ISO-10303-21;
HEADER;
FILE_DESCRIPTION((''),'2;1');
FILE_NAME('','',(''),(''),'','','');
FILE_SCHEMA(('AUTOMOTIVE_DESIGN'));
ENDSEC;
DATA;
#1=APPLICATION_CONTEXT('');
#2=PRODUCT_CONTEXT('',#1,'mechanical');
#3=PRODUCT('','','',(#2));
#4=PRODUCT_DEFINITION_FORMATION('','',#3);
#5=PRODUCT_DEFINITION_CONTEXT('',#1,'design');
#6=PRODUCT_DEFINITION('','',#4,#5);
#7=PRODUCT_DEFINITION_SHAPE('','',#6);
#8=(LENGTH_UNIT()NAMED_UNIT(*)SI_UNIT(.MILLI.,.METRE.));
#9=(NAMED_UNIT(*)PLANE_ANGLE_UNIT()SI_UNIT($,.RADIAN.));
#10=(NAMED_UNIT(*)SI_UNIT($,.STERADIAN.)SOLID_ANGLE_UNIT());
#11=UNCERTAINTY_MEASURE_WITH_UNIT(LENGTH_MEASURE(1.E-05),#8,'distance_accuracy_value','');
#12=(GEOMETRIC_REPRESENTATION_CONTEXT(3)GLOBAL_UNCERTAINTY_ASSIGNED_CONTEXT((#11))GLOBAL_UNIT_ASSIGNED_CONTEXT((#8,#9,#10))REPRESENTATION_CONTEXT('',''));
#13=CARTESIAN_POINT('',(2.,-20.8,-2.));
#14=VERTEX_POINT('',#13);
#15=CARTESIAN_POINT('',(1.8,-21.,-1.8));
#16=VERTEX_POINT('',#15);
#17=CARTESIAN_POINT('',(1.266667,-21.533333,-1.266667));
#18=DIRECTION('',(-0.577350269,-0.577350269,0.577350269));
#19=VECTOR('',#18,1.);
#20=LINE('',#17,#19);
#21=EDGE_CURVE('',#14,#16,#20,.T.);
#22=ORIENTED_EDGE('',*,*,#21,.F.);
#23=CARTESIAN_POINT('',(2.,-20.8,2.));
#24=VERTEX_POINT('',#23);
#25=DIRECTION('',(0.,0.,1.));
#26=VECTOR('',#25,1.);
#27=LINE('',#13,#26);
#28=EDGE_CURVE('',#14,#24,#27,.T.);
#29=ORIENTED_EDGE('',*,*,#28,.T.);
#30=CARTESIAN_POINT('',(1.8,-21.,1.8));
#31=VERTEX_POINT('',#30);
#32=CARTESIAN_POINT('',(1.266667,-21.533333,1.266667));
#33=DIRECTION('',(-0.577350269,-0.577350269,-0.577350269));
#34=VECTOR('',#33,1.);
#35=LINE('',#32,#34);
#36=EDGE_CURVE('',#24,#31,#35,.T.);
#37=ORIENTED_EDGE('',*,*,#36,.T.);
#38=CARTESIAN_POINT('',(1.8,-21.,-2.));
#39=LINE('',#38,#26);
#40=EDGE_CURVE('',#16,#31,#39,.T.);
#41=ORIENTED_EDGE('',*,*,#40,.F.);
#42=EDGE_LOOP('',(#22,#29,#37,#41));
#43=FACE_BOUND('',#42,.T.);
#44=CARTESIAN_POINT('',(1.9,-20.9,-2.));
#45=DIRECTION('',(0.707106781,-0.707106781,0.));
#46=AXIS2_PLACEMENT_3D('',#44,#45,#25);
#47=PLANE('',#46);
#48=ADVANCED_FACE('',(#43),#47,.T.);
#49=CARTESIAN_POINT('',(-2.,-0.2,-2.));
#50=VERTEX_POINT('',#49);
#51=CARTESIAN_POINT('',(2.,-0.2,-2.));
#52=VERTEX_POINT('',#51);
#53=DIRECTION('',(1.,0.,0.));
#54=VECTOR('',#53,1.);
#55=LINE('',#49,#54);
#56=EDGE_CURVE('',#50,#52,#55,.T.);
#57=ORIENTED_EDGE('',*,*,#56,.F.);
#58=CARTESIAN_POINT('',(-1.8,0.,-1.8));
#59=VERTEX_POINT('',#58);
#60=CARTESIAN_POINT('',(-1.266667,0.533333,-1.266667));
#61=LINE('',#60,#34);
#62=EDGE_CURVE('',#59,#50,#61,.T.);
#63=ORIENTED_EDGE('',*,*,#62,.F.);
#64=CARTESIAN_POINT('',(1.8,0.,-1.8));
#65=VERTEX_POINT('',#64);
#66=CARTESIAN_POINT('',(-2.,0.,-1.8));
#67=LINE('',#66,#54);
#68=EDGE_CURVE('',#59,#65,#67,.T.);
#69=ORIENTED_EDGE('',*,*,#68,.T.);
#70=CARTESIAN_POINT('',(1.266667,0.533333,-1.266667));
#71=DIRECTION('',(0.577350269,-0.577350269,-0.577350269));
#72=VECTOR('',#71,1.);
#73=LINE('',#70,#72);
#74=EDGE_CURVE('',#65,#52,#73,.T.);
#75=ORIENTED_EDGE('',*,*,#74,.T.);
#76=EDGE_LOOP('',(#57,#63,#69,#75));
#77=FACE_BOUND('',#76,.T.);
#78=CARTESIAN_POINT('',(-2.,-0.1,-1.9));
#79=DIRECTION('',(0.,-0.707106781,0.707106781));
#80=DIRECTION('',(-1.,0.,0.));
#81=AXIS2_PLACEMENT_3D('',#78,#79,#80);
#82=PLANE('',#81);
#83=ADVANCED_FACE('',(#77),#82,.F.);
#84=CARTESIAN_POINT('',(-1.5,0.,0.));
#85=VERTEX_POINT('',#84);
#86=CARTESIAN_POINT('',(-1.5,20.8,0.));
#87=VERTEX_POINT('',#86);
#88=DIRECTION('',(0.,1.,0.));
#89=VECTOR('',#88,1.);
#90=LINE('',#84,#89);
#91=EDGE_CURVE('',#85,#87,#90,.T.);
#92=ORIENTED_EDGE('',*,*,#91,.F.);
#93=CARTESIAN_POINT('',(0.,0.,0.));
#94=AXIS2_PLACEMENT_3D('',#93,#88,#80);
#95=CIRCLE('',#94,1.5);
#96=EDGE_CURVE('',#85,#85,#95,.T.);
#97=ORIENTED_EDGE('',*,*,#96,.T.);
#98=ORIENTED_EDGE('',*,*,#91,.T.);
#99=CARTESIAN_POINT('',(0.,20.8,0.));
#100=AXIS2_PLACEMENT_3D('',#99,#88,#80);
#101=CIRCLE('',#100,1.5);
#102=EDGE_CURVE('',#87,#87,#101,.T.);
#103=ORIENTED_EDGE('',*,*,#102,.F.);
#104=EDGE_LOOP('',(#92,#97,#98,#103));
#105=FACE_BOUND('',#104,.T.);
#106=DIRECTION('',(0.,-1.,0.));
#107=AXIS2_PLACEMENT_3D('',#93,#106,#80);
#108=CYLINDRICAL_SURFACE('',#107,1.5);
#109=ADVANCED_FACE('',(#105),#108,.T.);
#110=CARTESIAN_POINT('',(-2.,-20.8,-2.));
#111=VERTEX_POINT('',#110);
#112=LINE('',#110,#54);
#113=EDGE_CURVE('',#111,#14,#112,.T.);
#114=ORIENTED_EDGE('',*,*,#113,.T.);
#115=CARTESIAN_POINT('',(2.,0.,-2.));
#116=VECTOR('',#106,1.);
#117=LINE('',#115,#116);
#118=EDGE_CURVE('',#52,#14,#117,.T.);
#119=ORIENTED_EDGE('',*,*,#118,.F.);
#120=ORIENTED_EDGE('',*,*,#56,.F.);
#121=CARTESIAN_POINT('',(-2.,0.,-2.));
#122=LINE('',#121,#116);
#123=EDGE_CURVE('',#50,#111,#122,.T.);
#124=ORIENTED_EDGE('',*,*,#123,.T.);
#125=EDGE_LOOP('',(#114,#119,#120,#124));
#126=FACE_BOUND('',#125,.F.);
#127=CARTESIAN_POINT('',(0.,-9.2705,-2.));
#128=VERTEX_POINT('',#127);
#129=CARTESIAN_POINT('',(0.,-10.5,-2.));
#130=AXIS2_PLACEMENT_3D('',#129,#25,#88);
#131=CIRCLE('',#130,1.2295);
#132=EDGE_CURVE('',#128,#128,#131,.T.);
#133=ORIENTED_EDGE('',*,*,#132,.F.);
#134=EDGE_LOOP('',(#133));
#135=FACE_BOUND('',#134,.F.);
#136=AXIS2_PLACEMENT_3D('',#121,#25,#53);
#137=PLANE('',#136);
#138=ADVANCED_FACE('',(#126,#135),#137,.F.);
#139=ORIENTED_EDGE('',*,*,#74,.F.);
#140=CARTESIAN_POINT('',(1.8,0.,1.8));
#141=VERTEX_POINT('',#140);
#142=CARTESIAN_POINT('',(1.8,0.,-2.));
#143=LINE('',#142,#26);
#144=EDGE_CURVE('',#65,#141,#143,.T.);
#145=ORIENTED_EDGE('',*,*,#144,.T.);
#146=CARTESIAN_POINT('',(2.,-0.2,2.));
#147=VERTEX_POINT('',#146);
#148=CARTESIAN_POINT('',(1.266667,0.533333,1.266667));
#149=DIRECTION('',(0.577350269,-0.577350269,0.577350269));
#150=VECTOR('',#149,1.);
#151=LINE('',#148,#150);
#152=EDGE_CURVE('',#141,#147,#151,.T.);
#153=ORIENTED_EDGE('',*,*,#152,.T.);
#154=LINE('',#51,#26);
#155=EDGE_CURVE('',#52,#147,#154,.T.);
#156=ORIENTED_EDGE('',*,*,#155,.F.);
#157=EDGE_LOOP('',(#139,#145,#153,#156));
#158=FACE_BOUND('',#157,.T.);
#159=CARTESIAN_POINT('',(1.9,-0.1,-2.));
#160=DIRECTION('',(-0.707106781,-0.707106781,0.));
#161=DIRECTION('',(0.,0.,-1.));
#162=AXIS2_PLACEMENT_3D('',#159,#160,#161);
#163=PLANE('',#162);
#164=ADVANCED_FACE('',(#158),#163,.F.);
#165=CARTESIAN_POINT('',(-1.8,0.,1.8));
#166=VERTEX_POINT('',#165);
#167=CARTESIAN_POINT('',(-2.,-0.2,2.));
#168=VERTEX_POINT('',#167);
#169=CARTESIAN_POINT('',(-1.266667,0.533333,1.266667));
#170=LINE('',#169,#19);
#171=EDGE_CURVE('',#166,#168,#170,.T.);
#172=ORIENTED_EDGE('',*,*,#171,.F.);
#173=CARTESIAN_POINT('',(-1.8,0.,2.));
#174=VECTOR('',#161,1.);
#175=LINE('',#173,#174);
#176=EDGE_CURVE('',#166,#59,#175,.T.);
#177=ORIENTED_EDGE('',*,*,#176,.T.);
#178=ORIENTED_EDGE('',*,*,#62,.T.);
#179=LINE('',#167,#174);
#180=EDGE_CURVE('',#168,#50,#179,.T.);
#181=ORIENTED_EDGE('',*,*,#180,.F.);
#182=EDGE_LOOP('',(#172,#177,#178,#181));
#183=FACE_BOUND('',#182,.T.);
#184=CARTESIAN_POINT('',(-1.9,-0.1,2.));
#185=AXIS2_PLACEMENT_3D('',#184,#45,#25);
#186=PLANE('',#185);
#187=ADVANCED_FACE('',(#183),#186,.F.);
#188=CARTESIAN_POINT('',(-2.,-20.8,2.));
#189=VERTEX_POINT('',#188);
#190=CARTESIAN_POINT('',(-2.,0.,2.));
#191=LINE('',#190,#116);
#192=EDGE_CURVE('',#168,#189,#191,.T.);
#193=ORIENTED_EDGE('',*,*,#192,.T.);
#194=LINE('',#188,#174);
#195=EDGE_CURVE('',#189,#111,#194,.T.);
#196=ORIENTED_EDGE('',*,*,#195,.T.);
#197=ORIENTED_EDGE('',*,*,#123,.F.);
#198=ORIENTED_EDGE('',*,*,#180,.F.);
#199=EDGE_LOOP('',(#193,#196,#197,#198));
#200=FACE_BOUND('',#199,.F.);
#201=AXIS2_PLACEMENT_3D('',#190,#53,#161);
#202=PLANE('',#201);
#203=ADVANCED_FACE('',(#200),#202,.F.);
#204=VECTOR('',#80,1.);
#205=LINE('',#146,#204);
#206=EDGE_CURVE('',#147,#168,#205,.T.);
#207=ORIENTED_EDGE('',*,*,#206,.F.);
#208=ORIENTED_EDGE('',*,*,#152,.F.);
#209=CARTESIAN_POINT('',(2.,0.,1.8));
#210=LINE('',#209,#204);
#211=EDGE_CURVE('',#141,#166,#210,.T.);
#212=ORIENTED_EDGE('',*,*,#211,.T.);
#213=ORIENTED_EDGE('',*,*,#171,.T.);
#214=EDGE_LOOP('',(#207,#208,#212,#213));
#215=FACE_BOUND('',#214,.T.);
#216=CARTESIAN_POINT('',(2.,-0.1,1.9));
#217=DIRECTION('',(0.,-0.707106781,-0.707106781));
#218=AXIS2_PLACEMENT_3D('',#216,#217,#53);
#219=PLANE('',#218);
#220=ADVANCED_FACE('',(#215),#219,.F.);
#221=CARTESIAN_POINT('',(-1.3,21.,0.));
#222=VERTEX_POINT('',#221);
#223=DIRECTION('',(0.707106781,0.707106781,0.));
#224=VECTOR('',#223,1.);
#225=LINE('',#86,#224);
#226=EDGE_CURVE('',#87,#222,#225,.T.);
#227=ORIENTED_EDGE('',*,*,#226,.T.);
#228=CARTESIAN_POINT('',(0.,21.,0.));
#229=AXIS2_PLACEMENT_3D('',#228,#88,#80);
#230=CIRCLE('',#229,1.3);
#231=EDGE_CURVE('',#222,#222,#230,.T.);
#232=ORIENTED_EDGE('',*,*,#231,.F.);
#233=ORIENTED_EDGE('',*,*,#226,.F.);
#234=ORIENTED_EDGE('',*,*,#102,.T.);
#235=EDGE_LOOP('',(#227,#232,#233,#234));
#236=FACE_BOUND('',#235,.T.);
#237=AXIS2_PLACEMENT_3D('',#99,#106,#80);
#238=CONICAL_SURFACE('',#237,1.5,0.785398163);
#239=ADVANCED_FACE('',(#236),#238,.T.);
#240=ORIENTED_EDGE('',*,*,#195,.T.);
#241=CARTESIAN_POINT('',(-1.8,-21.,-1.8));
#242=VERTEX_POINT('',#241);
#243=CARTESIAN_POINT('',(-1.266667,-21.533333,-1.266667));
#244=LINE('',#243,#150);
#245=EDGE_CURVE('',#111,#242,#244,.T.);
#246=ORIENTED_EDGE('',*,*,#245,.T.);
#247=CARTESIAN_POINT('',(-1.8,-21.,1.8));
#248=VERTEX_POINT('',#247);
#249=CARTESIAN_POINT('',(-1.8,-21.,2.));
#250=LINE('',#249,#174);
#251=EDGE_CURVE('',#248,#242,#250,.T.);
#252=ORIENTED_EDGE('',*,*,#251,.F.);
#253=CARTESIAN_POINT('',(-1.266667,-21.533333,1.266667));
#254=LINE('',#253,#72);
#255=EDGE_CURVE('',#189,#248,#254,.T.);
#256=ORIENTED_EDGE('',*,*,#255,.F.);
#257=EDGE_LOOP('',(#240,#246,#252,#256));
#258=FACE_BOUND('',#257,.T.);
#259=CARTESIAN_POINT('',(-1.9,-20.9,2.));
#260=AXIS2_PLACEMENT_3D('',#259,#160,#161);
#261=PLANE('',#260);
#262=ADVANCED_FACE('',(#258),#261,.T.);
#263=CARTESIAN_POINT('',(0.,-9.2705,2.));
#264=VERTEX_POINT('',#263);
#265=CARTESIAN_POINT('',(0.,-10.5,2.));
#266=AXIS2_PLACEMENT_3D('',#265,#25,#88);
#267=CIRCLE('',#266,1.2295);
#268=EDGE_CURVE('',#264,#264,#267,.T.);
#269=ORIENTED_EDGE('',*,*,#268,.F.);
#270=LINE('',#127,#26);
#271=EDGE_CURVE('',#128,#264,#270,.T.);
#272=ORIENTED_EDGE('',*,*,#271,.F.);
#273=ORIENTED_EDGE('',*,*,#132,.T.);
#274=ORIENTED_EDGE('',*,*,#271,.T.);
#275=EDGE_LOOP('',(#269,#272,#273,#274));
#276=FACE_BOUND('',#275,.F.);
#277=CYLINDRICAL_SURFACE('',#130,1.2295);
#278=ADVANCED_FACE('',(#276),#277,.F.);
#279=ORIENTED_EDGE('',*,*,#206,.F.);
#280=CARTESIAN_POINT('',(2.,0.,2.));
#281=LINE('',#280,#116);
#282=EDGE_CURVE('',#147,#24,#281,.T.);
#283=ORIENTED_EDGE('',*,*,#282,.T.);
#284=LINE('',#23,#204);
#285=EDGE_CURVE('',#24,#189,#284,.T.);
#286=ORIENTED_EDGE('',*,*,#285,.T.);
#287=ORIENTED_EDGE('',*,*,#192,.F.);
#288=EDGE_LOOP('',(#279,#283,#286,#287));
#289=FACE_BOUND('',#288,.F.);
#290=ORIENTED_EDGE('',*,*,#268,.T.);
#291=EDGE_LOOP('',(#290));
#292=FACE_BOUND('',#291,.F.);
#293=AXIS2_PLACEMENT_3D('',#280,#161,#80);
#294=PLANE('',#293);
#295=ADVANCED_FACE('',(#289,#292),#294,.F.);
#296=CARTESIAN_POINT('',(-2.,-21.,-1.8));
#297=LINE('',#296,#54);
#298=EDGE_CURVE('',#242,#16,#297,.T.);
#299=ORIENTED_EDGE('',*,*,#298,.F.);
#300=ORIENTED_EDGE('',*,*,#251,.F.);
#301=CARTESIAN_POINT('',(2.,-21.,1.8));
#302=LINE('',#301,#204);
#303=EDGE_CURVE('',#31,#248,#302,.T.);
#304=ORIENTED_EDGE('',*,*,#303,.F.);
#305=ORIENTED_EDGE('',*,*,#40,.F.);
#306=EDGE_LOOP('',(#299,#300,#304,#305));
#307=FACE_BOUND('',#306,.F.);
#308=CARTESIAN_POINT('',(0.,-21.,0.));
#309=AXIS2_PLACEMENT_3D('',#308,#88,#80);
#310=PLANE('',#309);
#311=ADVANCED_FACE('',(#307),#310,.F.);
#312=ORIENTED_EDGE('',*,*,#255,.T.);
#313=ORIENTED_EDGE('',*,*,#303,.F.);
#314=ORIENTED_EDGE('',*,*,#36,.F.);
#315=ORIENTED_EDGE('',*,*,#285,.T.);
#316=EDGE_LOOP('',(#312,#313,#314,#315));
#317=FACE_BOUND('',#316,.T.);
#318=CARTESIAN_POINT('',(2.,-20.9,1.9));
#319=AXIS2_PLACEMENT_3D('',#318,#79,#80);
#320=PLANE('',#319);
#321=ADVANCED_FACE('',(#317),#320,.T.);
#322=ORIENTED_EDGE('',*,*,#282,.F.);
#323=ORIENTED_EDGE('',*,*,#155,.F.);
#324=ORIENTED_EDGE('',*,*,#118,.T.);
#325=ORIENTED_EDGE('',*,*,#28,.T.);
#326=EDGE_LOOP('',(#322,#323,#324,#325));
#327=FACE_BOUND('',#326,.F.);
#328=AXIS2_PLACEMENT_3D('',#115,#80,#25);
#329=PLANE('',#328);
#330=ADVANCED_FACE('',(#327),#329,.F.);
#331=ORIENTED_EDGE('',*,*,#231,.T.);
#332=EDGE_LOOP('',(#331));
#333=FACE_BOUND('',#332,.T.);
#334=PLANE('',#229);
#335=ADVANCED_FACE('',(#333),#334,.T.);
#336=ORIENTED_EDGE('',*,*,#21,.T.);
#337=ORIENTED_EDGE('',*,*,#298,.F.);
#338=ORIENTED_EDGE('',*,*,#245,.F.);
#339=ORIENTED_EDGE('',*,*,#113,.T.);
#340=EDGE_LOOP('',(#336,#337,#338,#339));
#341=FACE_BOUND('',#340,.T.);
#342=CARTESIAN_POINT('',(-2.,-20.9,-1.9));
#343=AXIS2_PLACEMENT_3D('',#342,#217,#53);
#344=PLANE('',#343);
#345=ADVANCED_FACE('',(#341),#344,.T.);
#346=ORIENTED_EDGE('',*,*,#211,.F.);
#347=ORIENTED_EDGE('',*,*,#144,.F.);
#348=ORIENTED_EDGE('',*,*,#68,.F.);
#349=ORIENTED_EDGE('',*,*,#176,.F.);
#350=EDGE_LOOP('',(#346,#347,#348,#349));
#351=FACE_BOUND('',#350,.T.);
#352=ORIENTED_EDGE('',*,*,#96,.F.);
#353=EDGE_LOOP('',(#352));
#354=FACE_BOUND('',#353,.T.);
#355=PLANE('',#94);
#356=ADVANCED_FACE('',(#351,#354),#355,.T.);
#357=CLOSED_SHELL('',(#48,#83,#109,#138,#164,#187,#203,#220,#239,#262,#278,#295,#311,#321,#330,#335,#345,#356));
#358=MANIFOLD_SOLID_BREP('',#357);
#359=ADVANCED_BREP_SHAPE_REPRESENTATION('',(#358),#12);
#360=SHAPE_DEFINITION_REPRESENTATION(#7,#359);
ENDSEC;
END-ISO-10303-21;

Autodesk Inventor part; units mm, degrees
ref_plane "YZ Plane" through (0, 0, 0) normal (1, 0, 0) x (0, 1, 0)
ref_plane "XZ Plane" through (0, 0, 0) normal (0, 1, 0) x (-1, 0, 0)
ref_plane "XY Plane" through (0, 0, 0) normal (0, 0, 1) x (1, 0, 0)
sketch "Sketch4" plane through (0, 0, 0) normal (0, 1, 0) x (-1, 0, 0)
  circle A0 centre (0, 0) radius 1.5
  line L0 (-2, 2) -> (2, 2)
  line L1 (2, 2) -> (2, -2)
  line L2 (2, -2) -> (-2, -2)
  line L3 (-2, -2) -> (-2, 2)
  line L4 (-2, 2) -> (2, -2) construction
  line L5 (2, 2) -> (-2, -2) construction
  point P0 (-1.5, 0)
  point P1 (0, -1.5)
  point P2 (0, 1.5)
  point P3 (1.5, 0)
  dimension "Radius" = 3
  dimension "d103" = 4
extrude "Extrusion2" add sketch "Sketch4" along normal mid plane 42 contours A0
extrude "Extrusion10" add sketch "Sketch4" against normal up to surface (21 mm away) contours A0 | L0 L1 L2 L3
chamfer "Chamfer1" distance 0.2 angle 45 9 edges at (1.5, 21, 0) (0, -21, -2) (2, -21, 0) (0, -21, 2) (-2, -21, 0) (2, 0, 0) (0, 0, 2) (-2, 0, 0) (0, 0, -2)
sketch "Sketch14" plane through (2, -0.2, -2) normal (0, 0, -1) x (-1, 0, 0)
  line L0 (0, 0) -> (0, -20.6) projected
  line L1 (0, -10.3) -> (2, -10.3) construction
  point P0 (2, 0.2)
hole "Hole6" at (0, -10.5, -2) direction (0, 0, 1) diameter 2.459 end through all thread size "M3x0.5" class "6H" standard "ISO Metric profile"
properties part number "Ball Track Rest Pin" material "Bronze, Soft Tin"
